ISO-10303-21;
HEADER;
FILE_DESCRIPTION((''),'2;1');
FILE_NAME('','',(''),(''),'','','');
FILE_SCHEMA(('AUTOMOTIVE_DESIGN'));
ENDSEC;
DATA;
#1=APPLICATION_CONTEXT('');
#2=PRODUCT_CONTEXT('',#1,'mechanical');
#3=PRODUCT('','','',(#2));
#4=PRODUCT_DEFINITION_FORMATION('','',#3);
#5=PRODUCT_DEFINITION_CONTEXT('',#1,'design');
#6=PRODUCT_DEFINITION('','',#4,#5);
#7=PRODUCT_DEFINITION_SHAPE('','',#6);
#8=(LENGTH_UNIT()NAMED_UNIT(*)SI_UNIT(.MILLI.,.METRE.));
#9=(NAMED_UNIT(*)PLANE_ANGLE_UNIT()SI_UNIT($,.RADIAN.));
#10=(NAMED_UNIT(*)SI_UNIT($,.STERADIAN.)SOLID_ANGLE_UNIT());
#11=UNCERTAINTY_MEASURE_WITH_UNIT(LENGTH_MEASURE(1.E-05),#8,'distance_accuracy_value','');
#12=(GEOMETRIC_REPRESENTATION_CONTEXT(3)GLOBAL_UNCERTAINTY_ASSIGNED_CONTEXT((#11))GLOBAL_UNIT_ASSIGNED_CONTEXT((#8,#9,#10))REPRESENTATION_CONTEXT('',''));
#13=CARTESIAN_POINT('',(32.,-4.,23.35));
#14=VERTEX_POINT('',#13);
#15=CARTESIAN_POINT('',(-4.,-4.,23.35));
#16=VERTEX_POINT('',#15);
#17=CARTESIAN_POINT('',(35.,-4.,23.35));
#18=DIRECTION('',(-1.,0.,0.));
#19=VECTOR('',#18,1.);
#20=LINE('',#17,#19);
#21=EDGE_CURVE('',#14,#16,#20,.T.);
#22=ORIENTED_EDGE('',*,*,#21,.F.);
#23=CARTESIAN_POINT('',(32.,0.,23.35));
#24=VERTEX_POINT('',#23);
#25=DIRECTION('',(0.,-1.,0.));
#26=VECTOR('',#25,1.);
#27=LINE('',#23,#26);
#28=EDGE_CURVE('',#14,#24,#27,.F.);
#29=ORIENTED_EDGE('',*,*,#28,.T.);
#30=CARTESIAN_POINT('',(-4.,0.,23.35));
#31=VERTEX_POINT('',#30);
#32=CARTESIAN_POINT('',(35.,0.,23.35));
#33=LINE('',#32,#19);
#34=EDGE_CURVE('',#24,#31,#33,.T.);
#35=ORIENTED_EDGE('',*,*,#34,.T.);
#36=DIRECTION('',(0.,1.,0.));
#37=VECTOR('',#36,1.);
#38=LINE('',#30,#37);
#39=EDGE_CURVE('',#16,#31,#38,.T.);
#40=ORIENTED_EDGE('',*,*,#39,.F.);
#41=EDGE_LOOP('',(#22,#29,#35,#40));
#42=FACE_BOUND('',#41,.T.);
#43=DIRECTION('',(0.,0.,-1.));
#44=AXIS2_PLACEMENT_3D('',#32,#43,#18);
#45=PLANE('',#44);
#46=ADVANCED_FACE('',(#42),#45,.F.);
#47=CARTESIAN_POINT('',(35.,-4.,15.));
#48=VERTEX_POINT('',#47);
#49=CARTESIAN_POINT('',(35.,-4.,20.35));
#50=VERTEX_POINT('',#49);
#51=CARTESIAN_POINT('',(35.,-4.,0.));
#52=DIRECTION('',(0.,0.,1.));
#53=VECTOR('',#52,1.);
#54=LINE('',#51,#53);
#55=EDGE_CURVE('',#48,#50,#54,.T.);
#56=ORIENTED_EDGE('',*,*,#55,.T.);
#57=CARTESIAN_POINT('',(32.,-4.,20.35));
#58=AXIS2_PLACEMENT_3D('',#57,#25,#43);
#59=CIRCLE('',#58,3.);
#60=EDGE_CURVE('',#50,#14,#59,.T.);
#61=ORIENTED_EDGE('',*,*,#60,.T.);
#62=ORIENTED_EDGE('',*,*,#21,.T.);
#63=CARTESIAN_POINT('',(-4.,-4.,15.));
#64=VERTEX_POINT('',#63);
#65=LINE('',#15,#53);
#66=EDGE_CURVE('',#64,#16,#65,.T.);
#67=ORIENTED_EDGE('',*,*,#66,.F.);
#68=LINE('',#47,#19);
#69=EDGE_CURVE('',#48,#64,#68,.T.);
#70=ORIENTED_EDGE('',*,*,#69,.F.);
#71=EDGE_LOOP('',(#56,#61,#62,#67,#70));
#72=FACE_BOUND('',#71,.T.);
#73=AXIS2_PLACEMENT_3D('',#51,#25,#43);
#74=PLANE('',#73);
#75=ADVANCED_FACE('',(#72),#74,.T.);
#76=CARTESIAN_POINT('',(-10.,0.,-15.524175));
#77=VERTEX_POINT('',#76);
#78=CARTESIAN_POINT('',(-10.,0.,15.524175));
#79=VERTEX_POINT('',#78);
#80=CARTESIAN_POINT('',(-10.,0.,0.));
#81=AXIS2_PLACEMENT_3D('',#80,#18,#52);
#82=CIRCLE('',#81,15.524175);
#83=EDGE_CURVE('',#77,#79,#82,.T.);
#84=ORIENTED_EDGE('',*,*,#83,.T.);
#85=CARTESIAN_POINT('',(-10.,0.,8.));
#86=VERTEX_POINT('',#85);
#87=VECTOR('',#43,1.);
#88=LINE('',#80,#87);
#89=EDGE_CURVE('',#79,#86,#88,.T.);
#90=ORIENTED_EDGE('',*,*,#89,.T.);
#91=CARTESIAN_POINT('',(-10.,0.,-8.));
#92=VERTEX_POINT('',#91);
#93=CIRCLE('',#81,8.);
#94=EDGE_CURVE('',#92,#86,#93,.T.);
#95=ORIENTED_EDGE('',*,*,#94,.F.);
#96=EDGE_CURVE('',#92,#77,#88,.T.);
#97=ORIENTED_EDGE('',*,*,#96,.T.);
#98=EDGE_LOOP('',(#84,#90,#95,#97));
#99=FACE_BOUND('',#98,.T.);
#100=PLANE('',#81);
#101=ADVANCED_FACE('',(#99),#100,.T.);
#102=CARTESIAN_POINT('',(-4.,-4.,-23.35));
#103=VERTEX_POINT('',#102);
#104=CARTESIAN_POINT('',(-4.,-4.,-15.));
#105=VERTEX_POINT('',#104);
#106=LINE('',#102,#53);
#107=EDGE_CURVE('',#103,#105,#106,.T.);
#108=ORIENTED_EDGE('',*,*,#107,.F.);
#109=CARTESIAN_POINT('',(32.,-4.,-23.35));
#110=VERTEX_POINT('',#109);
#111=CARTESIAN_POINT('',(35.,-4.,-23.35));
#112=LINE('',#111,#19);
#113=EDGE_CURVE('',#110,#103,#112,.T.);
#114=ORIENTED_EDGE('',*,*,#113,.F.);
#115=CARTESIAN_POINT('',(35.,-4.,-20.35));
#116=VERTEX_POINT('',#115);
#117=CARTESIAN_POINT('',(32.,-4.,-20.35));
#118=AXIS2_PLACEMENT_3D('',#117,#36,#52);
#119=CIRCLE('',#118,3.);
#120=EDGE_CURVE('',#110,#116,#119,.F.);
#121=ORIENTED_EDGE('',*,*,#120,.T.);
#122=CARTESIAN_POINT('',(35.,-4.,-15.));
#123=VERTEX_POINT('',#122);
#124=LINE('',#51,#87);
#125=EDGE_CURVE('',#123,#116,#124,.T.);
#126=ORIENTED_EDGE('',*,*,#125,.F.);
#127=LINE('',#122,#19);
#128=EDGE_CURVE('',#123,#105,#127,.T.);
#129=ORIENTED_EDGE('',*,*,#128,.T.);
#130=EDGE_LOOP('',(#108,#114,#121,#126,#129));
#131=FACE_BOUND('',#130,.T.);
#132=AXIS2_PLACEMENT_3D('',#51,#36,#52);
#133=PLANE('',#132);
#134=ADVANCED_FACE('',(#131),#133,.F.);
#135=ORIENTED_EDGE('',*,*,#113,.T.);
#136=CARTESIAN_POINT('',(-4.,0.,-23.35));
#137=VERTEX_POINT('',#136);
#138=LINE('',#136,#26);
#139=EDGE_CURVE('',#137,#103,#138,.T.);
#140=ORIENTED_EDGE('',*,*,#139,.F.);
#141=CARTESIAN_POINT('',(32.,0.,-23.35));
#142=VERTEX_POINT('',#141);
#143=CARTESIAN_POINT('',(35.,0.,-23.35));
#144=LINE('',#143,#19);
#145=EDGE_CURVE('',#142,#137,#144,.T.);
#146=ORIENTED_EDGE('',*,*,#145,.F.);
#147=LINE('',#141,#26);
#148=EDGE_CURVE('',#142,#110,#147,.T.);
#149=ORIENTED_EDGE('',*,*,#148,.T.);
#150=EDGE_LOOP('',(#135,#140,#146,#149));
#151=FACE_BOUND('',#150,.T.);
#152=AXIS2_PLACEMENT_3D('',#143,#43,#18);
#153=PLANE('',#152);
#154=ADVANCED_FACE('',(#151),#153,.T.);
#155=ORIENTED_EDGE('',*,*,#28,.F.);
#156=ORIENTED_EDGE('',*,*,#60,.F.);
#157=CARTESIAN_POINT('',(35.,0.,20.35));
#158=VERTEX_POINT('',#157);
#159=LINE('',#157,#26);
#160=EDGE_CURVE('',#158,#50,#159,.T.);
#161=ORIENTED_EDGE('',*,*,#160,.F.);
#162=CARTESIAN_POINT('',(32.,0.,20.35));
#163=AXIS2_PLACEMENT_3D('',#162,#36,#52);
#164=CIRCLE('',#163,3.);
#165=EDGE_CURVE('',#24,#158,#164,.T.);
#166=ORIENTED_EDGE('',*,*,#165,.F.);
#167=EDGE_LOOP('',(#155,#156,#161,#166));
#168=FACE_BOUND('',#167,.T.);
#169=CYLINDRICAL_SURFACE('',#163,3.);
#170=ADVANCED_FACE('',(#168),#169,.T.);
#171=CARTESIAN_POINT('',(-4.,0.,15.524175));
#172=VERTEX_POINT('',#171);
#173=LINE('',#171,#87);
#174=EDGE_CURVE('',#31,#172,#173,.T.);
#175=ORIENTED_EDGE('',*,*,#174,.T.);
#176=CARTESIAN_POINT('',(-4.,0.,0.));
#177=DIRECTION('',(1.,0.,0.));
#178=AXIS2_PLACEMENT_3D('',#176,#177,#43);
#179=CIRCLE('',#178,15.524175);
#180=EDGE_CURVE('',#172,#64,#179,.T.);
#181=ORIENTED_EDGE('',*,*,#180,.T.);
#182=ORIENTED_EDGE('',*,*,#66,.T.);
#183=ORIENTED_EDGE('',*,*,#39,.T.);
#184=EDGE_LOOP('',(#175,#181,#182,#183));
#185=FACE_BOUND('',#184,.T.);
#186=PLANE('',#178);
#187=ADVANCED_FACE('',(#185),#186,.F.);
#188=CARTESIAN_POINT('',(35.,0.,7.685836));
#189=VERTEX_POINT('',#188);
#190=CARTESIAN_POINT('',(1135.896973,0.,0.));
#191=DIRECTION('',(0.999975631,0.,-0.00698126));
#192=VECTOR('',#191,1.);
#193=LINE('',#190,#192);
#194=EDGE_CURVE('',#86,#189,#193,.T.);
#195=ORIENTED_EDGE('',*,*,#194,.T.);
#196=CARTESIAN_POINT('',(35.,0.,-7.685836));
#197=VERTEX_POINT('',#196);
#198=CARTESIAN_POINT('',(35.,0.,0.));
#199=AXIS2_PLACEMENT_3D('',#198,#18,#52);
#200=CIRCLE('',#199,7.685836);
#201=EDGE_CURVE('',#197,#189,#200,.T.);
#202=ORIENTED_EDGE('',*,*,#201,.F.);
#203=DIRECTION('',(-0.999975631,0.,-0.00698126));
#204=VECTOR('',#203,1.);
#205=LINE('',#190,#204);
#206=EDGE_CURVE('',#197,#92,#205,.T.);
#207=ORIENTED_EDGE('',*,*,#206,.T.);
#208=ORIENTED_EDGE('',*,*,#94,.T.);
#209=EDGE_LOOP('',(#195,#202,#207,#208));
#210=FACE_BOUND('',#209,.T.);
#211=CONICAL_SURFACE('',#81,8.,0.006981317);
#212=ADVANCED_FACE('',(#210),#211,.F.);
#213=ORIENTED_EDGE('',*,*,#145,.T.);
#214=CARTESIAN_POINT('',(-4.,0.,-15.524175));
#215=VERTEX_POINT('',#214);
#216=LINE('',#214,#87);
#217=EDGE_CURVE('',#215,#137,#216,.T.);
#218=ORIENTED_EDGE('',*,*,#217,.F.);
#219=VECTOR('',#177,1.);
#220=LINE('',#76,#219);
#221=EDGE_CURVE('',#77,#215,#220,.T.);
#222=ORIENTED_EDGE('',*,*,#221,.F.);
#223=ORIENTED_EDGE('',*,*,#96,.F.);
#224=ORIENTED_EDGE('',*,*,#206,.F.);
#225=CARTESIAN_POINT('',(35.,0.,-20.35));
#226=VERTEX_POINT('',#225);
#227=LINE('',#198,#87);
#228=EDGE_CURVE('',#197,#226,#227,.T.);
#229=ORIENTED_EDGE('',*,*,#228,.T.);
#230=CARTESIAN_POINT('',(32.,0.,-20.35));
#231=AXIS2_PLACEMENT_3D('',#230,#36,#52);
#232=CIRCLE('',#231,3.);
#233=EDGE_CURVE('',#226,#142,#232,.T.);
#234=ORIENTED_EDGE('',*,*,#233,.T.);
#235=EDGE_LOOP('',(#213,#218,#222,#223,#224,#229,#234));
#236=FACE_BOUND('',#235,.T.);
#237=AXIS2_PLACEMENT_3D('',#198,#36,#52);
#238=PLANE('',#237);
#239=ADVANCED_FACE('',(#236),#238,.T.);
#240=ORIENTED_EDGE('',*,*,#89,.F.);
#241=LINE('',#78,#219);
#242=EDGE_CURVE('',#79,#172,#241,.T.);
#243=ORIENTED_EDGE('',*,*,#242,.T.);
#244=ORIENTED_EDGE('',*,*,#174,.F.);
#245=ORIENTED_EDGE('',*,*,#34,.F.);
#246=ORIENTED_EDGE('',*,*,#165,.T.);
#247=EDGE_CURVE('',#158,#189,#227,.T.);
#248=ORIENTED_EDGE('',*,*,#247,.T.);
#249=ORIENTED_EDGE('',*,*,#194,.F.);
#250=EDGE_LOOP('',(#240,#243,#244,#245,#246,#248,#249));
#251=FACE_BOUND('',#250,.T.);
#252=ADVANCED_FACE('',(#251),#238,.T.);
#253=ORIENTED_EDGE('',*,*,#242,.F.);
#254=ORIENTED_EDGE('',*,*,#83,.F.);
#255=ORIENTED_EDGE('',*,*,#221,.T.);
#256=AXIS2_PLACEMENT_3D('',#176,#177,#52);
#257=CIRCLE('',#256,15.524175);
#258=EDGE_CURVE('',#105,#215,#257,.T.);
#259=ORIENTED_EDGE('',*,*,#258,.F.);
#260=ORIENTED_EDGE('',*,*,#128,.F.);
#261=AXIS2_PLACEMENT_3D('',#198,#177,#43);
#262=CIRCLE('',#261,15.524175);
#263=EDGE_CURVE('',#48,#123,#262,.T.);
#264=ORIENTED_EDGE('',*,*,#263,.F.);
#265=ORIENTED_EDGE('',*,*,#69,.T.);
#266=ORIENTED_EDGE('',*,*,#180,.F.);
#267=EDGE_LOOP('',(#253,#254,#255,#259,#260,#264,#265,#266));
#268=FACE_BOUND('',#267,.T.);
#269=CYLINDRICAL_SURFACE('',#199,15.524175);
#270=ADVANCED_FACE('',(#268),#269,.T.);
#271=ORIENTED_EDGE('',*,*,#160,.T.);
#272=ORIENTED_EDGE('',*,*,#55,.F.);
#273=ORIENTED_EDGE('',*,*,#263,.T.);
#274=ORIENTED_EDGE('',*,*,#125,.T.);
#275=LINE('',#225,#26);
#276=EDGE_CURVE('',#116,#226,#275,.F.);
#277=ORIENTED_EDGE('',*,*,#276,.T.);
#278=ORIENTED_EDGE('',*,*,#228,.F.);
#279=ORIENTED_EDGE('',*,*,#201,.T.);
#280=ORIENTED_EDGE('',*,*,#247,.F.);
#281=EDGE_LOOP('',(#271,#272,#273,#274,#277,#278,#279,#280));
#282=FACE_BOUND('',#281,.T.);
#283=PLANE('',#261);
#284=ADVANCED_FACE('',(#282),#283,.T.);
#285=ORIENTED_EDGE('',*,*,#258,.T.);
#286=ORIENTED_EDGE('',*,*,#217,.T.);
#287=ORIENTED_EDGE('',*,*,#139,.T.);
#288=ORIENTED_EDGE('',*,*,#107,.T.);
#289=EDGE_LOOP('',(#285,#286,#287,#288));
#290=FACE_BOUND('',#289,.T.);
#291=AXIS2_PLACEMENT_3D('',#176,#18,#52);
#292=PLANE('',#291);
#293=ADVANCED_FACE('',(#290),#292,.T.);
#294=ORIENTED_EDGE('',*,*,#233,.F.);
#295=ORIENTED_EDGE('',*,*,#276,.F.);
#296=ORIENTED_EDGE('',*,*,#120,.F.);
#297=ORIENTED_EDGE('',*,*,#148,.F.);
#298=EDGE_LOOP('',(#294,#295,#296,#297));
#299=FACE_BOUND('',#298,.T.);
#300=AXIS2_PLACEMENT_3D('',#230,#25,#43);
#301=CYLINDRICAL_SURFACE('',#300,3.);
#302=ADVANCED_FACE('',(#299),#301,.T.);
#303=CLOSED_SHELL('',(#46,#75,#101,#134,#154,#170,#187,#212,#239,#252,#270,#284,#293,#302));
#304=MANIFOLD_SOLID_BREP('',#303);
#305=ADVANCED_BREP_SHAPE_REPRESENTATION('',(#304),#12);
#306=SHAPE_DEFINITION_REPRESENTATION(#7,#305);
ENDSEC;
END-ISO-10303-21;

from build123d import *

# Parameters (mm, degrees)
BOSS_EXTRUDE1_DEPTH = 35
BOSS_EXTRUDE2_START = 10
BOSS_EXTRUDE2_DEPTH = 10
FILLET1_R           = 3
FILLET3_R           = 3
BOSS_EXTRUDE3_START = 4
BOSS_EXTRUDE3_DEPTH = 4
SKETCH4_R           = 8
CUT_EXTRUDE7_DEPTH  = 54.020962835
CUT_EXTRUDE7_DRAFT  = -0.4


with BuildPart() as part:
    # Sketch1 → Boss-Extrude1 (new body)
    with BuildSketch(Plane(origin=(0, 0, 0), x_dir=(0, 0, -1), z_dir=(1, 0, 0))):
        with BuildLine():
            Line((-9, 0), (-16.35, 0))
            Line((-16.35, 0), (-23.35, 0))
            Line((-23.35, 0), (-23.35, -4))
            Line((-23.35, -4), (-15, -4))
            ThreePointArc((-15, -4), (0, -15.524174696), (15, -4))
            Line((15, -4), (23.35, -4))
            Line((23.35, -4), (23.35, 0))
            Line((23.35, 0), (16.35, 0))
            Line((16.35, 0), (9, 0))
            Line((9, 0), (-9, 0))
        make_face()
    extrude(amount=BOSS_EXTRUDE1_DEPTH)

    # Sketch2 → Boss-Extrude2 (add)
    with BuildSketch(Plane.ZY.offset(BOSS_EXTRUDE2_START)):
        with BuildLine():
            Line((0, 0), (-15.524174696, 0))
            ThreePointArc((-15.524174696, 0), (-15.392573216, -2.017099348), (-15, -4))
            ThreePointArc((-15, -4), (0, -15.524174696), (15, -4))
            ThreePointArc((15, -4), (15.392573216, -2.017099348), (15.524174696, 0))
            Line((15.524174696, 0), (0, 0))
        make_face()
    extrude(amount=-BOSS_EXTRUDE2_DEPTH)

    # Fillet1
    fillet1_edges = [part.edges().sort_by_distance(p)[0] for p in [
        (35, -2, 23.35),
    ]]
    fillet(fillet1_edges, radius=FILLET1_R)

    # Fillet3
    fillet3_edges = [part.edges().sort_by_distance(p)[0] for p in [
        (35, -2, -23.35),
    ]]
    fillet(fillet3_edges, radius=FILLET3_R)

    # Sketch3 → Boss-Extrude3 (add)
    with BuildSketch(Plane.ZY.offset(BOSS_EXTRUDE3_START)):
        with BuildLine():
            Line((-15.524174696, 0), (-23.35, 0))
            Line((-23.35, 0), (-23.35, -4))
            Line((-23.35, -4), (-15, -4))
            ThreePointArc((-15, -4), (-15.392573216, -2.017099348), (-15.524174696, 0))
        make_face()
        with BuildLine():
            Line((23.35, -4), (15, -4))
            ThreePointArc((15, -4), (15.392573216, -2.017099348), (15.524174696, 0))
            Line((15.524174696, 0), (23.35, 0))
            Line((23.35, 0), (23.35, -4))
        make_face()
    extrude(amount=-BOSS_EXTRUDE3_DEPTH)


with BuildPart() as cut_extrude7_tool:
    # Sketch4 → Cut-Extrude7 (with draft: the straight prism first)
    with BuildSketch(Plane.ZY.offset(10)):
        Circle(SKETCH4_R)
    extrude(amount=-CUT_EXTRUDE7_DEPTH)
    # Cut-Extrude7: the draft: its side faces are tilted about the plane it starts from
    cut_extrude7_sides = [cut_extrude7_tool.faces().sort_by_distance(p)[0] for p in [
        (17.010481418, 0, -8),
    ]]
    draft(cut_extrude7_sides, Plane.ZY.offset(10), CUT_EXTRUDE7_DRAFT)


with BuildPart() as part_1:
    add(part.part)

    # Cut-Extrude7: cut by cut_extrude7_tool
    add(cut_extrude7_tool.part, mode=Mode.SUBTRACT)


solid = part_1.part
